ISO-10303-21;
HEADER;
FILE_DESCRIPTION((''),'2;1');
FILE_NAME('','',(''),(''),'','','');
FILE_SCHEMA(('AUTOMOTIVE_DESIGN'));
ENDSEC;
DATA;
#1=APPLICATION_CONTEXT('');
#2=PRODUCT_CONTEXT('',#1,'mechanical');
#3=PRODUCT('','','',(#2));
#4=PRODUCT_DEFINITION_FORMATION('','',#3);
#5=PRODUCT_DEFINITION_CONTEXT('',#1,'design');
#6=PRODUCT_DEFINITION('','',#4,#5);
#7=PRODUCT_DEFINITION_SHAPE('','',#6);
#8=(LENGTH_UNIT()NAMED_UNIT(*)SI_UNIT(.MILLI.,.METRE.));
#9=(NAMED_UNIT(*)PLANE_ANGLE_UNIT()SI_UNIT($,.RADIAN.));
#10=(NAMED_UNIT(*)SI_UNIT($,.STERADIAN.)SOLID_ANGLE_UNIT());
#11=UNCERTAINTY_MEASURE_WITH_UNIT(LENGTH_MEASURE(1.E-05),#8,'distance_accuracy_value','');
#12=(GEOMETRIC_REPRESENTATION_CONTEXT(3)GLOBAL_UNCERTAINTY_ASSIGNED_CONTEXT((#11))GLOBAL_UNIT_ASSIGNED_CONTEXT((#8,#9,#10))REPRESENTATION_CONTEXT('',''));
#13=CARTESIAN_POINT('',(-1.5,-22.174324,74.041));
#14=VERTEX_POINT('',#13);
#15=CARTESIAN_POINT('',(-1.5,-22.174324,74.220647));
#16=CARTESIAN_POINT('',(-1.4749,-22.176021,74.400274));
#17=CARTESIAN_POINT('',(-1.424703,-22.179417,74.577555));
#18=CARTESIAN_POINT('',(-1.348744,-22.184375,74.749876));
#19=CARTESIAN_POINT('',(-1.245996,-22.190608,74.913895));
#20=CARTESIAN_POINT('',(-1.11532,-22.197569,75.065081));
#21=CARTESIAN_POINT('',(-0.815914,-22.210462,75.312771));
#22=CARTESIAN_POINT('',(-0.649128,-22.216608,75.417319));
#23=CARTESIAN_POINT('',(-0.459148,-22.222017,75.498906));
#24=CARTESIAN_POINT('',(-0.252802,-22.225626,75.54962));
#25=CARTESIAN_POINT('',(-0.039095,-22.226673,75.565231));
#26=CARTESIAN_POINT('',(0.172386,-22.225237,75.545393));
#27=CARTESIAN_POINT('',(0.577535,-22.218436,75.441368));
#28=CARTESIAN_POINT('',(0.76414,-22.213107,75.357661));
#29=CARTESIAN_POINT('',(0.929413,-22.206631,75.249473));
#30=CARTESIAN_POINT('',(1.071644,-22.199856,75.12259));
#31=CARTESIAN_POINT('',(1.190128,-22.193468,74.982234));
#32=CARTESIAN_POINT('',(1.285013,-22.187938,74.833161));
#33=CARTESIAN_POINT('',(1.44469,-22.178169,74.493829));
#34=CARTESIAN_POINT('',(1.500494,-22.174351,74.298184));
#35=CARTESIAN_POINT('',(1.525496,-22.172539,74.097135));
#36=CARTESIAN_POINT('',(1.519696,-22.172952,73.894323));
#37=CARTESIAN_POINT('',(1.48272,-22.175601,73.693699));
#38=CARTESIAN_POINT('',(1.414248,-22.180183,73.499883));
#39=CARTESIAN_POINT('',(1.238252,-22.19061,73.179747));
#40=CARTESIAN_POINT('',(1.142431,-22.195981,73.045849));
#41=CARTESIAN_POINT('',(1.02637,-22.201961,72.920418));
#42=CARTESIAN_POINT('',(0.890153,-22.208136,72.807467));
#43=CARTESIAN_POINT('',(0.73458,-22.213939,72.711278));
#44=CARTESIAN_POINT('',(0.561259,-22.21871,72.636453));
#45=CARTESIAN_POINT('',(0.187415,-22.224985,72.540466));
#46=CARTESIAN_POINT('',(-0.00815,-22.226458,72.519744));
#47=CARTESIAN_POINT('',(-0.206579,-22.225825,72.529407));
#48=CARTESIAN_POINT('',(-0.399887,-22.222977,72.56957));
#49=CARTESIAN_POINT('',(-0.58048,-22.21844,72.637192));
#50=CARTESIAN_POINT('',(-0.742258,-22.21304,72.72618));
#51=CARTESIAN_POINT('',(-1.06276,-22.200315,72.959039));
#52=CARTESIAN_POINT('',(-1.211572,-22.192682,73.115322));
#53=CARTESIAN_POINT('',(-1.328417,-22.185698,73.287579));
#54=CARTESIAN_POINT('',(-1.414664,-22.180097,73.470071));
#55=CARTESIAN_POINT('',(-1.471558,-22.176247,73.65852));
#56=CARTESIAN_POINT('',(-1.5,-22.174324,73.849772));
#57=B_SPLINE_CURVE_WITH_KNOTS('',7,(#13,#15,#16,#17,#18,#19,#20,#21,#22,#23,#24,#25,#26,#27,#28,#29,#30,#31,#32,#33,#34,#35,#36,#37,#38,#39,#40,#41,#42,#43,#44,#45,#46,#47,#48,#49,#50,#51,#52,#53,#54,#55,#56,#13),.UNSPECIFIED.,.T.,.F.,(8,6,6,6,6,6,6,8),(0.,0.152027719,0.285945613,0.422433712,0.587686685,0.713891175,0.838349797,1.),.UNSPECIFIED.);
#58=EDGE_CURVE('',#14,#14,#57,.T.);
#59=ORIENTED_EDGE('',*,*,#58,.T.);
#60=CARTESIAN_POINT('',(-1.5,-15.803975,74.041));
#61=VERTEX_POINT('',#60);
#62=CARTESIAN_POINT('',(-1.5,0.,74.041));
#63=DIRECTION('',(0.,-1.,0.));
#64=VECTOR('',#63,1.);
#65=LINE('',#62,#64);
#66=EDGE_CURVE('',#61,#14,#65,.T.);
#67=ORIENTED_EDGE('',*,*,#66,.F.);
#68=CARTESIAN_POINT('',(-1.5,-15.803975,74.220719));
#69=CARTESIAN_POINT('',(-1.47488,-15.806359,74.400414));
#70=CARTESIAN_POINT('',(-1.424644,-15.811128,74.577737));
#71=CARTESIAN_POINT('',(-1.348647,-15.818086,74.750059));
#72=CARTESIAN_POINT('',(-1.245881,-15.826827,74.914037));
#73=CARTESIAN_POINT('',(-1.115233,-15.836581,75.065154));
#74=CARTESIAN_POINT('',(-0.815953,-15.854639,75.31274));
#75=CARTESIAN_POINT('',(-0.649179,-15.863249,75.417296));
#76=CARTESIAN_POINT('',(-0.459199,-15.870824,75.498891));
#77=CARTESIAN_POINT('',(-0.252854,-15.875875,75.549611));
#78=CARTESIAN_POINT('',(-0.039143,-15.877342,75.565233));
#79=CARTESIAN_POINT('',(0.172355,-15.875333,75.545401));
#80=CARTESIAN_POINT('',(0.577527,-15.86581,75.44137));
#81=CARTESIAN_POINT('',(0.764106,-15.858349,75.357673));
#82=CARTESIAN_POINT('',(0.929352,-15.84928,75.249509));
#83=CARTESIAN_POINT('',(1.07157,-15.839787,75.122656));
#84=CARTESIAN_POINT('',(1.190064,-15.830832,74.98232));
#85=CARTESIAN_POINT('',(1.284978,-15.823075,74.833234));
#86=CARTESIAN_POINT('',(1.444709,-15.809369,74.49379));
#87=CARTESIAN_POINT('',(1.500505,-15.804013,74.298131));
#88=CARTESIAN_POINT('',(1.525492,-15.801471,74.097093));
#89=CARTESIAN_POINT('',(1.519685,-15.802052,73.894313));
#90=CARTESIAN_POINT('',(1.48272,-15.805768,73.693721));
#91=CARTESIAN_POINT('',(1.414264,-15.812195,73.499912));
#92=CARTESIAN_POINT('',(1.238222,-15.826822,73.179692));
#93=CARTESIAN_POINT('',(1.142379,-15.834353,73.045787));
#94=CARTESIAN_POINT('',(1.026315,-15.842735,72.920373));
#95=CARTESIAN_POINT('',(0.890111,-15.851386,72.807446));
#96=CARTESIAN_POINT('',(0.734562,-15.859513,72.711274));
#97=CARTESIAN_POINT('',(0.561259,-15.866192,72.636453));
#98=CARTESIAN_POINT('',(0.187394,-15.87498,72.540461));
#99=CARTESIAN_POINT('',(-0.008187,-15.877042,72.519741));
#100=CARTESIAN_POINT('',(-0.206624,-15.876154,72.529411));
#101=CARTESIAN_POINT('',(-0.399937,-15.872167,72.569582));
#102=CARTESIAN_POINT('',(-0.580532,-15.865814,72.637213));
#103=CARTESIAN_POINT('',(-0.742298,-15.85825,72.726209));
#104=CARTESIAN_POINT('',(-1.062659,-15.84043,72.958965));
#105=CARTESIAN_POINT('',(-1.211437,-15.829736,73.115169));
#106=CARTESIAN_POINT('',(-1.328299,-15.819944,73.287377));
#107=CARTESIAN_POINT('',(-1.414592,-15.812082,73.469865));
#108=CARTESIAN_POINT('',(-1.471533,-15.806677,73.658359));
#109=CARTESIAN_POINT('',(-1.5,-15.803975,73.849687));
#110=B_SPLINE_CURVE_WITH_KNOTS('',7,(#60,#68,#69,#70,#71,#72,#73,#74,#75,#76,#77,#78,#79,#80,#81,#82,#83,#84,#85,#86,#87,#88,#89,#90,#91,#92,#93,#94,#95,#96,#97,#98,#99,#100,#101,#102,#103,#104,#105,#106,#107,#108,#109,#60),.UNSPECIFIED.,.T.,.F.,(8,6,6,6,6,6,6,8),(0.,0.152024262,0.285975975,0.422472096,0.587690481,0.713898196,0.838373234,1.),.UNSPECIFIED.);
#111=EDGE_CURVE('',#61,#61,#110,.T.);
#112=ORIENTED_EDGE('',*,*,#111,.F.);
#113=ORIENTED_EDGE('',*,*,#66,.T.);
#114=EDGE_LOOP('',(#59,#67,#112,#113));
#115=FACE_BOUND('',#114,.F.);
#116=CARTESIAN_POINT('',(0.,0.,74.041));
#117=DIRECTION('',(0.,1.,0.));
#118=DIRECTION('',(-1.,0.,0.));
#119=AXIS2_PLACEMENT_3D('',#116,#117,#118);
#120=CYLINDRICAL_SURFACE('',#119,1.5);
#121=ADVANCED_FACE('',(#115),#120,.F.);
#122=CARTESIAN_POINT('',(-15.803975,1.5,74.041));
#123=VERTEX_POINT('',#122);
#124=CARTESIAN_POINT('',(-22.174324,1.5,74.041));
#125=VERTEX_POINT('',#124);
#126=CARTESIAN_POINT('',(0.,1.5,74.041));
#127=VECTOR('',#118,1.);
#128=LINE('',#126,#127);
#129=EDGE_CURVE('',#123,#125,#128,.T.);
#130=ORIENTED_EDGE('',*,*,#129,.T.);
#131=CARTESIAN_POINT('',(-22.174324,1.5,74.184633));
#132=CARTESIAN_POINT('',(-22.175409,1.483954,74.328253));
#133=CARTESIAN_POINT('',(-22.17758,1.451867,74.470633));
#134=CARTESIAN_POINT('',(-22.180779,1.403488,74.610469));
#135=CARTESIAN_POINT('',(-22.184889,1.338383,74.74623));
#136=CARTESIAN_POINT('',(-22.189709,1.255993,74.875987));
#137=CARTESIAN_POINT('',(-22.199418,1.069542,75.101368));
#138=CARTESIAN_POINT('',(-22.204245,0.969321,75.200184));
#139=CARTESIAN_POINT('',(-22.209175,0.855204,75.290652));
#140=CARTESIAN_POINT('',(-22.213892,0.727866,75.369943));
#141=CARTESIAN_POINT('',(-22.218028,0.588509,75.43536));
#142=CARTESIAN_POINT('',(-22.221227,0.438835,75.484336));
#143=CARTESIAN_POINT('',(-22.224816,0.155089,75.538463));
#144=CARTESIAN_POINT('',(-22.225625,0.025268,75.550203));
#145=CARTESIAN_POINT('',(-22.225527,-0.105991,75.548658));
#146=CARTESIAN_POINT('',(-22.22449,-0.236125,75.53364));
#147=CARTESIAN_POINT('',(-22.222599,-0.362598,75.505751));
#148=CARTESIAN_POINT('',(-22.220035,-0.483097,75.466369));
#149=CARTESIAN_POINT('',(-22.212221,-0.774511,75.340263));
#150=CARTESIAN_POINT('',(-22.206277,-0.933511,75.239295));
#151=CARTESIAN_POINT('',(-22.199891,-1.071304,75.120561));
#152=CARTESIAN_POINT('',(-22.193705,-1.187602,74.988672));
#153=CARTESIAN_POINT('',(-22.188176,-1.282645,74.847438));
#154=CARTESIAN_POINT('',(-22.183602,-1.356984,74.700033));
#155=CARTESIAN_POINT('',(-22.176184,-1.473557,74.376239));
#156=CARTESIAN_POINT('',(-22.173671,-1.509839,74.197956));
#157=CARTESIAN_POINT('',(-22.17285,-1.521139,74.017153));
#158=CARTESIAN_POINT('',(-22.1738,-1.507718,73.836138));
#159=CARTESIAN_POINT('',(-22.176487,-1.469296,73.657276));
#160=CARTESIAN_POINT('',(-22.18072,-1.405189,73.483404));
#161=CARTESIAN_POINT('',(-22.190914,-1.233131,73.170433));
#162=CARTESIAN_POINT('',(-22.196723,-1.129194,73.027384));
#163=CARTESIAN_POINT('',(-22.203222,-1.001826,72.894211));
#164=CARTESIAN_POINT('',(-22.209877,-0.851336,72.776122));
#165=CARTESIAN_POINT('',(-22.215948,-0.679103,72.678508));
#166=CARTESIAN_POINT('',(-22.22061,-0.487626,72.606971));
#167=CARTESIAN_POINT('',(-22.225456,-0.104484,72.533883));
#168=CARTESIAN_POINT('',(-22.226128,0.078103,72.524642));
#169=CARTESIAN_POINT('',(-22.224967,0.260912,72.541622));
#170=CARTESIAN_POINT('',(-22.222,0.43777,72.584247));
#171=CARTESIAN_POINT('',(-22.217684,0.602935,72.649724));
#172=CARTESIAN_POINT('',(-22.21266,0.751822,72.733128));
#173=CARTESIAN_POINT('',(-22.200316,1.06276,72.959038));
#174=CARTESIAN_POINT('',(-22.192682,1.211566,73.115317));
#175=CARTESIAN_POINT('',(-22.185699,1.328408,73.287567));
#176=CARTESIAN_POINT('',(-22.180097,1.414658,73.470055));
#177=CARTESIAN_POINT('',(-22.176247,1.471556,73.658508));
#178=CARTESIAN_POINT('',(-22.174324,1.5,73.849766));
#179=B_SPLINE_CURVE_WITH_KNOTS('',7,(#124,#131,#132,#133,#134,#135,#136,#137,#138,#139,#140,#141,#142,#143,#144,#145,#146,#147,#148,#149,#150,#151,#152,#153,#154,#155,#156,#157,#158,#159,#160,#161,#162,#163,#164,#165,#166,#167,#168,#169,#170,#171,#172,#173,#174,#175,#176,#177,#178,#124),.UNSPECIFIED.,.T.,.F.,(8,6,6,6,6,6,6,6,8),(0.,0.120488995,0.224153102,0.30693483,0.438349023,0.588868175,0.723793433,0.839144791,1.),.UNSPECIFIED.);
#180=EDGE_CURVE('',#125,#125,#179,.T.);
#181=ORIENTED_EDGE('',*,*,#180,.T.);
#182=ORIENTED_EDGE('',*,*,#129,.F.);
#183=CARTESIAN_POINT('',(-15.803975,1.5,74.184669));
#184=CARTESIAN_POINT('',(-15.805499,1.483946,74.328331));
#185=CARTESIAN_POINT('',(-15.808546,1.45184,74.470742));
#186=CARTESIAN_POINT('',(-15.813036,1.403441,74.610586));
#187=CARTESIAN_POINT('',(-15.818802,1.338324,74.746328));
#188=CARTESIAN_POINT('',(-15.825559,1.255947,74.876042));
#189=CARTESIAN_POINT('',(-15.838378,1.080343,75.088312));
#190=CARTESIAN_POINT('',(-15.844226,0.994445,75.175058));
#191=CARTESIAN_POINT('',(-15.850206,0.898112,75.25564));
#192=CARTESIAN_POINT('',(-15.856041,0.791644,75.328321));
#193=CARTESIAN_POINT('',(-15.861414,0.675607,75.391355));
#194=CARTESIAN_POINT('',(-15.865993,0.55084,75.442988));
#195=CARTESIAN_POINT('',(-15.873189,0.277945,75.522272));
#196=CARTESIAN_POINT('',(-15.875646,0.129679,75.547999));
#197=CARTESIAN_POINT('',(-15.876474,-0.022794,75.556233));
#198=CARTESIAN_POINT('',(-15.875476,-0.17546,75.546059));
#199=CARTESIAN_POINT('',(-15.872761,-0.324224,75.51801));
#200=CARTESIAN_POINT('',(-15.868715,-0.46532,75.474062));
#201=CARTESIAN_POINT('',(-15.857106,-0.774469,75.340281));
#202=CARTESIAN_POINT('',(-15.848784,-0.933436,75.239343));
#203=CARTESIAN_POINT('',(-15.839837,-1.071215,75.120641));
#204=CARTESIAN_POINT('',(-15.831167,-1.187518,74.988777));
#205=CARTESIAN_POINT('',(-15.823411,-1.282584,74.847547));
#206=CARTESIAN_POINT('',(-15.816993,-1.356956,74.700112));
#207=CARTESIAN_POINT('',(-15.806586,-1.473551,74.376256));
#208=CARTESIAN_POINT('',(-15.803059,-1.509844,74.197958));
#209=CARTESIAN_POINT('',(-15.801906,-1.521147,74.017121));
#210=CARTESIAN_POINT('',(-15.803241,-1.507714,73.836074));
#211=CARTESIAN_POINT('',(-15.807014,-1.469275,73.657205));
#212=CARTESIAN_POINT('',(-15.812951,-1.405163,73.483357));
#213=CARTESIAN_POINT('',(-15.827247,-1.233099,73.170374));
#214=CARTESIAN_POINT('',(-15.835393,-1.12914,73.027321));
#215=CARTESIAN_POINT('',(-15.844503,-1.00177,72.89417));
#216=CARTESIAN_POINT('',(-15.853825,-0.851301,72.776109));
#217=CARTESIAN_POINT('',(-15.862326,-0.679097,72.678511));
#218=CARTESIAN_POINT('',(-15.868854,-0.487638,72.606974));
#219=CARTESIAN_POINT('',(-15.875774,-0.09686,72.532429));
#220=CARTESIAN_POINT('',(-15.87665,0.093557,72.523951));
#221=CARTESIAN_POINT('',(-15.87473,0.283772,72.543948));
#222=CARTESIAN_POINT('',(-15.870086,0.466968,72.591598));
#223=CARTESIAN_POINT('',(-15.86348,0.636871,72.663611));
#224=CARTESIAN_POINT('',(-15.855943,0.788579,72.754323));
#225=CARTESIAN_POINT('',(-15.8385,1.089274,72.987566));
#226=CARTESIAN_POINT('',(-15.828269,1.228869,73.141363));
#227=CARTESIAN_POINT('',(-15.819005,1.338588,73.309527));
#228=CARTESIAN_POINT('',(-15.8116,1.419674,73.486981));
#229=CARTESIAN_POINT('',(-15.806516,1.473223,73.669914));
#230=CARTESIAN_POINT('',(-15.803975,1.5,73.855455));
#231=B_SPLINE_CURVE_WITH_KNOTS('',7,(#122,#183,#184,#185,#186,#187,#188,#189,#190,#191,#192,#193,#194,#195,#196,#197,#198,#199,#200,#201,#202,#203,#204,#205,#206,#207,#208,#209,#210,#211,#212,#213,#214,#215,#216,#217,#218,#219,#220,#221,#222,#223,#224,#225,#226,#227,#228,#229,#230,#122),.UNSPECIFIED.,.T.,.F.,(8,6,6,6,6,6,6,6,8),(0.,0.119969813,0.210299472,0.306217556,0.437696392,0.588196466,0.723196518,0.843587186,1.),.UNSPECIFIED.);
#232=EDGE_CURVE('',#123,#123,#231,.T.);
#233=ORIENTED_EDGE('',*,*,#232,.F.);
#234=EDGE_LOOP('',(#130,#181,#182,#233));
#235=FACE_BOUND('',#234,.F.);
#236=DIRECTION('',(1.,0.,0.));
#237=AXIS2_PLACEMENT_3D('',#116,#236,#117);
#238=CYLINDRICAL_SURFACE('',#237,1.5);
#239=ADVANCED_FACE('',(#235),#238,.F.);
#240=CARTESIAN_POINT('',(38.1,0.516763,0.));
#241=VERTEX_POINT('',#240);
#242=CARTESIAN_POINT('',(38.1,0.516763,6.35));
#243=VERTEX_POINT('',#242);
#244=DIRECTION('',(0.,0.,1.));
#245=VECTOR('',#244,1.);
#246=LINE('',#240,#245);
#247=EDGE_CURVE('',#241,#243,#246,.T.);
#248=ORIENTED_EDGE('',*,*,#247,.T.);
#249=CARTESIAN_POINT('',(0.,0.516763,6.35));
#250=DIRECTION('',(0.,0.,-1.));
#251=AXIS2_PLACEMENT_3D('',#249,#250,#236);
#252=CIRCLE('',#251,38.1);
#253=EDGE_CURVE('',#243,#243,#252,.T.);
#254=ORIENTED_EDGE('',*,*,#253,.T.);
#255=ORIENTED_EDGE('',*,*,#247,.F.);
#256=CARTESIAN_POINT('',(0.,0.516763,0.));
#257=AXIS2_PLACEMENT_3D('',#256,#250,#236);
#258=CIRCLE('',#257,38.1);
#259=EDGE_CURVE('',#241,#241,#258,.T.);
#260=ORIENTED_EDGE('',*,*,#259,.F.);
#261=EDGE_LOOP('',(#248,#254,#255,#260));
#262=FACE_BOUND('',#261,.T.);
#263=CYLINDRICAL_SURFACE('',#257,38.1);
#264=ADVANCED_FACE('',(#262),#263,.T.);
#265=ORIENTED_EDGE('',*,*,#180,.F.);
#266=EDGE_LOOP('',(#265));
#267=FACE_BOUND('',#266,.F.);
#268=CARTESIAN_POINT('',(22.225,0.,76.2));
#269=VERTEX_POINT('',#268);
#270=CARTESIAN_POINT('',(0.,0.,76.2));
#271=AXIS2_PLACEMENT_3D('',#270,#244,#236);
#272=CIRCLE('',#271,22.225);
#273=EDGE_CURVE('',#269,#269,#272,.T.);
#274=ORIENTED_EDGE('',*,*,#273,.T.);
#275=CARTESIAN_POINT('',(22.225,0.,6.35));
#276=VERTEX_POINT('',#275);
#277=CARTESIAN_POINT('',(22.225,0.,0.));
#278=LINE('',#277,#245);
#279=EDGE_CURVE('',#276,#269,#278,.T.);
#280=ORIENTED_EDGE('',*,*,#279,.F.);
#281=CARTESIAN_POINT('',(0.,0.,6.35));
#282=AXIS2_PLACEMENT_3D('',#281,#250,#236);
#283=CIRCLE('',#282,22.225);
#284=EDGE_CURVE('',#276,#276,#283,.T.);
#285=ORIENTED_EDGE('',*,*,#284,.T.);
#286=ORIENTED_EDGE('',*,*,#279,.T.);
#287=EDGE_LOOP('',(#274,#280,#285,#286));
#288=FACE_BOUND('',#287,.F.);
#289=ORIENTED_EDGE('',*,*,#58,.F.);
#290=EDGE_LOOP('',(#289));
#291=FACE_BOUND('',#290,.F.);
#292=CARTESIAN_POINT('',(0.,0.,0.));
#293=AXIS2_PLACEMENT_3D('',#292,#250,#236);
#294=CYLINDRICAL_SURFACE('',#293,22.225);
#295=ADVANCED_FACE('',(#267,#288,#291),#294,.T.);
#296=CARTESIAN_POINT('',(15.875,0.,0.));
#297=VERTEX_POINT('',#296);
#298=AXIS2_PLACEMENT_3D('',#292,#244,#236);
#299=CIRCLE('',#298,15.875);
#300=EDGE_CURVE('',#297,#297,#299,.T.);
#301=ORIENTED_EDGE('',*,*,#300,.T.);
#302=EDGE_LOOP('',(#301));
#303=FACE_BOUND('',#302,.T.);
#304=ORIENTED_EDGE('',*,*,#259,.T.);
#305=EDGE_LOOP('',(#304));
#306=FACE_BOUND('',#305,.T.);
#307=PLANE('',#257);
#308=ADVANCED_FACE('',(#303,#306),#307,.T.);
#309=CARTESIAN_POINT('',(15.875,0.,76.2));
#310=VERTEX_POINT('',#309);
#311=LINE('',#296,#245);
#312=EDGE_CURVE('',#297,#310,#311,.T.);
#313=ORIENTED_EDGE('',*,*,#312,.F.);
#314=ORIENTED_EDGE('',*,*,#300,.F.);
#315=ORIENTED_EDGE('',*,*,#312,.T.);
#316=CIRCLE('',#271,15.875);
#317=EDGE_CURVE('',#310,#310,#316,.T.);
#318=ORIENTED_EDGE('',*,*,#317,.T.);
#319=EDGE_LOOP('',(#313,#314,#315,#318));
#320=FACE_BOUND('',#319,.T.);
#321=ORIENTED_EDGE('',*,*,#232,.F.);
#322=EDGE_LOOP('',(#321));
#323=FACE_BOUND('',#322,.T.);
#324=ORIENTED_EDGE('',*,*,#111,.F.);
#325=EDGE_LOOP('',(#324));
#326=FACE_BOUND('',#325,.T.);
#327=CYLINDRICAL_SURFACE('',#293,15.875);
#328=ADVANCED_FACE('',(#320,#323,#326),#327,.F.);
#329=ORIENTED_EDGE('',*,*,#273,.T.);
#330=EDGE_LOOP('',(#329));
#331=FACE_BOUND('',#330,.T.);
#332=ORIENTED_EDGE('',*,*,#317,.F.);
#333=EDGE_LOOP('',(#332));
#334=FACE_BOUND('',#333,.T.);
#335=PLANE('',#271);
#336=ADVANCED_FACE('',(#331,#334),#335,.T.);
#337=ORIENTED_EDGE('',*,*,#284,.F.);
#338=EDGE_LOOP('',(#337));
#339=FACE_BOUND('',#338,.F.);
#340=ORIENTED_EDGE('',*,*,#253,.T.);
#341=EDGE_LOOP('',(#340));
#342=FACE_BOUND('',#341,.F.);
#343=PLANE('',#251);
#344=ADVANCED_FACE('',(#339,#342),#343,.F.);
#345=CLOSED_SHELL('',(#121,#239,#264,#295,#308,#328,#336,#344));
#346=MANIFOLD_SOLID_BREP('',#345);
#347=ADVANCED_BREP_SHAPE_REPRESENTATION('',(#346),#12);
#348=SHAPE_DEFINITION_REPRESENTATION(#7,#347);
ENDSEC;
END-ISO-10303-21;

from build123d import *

# Parameters (mm, degrees)
F0_R            = 22.225
F0_R_2          = 15.875
F1_DEPTH        = 76.2
F2_R            = 1.5
F3_DEPTH        = 25
F3_COPIES_COUNT = 2
F3_COPIES_ANGLE = 90
F4_R            = 38.1
F4_R_2          = 22.225
F5_DEPTH        = 6.35


# Not quite as in the source:
# - a pattern or mirror of a feature is missing from the dataset's text; its kind, count and spacing are read off the source's solid


with BuildPart() as f1:
    # F0 (on Top) → F1 (new body)
    with BuildSketch(Plane.XY):
        Circle(F0_R)
        Circle(F0_R_2, mode=Mode.SUBTRACT)
    extrude(amount=F1_DEPTH)

    # F2 (on Right) → F3 (cut)
    with BuildSketch(Plane.YZ):
        with Locations((0, 74.041)):
            Circle(F2_R)
    f3 = extrude(amount=-F3_DEPTH, mode=Mode.SUBTRACT)

    # F3_copies: F3 ×2 about axis
    f3_copies_axis = Axis((0, 0, 0), (0, 0, 1))
    for i in range(1, F3_COPIES_COUNT):
        add(f3.rotate(f3_copies_axis, i * F3_COPIES_ANGLE / (F3_COPIES_COUNT - 1)), mode=Mode.SUBTRACT)

    # F4 (on face) → F5 (join)
    with BuildSketch(Plane(origin=(0, 0, 0), x_dir=(1, 0, 0), z_dir=(0, 0, -1))):
        with Locations((0, -0.5167627824)):
            Circle(F4_R)
        Circle(F4_R_2, mode=Mode.SUBTRACT)
    extrude(amount=-F5_DEPTH)


solid = f1.part
